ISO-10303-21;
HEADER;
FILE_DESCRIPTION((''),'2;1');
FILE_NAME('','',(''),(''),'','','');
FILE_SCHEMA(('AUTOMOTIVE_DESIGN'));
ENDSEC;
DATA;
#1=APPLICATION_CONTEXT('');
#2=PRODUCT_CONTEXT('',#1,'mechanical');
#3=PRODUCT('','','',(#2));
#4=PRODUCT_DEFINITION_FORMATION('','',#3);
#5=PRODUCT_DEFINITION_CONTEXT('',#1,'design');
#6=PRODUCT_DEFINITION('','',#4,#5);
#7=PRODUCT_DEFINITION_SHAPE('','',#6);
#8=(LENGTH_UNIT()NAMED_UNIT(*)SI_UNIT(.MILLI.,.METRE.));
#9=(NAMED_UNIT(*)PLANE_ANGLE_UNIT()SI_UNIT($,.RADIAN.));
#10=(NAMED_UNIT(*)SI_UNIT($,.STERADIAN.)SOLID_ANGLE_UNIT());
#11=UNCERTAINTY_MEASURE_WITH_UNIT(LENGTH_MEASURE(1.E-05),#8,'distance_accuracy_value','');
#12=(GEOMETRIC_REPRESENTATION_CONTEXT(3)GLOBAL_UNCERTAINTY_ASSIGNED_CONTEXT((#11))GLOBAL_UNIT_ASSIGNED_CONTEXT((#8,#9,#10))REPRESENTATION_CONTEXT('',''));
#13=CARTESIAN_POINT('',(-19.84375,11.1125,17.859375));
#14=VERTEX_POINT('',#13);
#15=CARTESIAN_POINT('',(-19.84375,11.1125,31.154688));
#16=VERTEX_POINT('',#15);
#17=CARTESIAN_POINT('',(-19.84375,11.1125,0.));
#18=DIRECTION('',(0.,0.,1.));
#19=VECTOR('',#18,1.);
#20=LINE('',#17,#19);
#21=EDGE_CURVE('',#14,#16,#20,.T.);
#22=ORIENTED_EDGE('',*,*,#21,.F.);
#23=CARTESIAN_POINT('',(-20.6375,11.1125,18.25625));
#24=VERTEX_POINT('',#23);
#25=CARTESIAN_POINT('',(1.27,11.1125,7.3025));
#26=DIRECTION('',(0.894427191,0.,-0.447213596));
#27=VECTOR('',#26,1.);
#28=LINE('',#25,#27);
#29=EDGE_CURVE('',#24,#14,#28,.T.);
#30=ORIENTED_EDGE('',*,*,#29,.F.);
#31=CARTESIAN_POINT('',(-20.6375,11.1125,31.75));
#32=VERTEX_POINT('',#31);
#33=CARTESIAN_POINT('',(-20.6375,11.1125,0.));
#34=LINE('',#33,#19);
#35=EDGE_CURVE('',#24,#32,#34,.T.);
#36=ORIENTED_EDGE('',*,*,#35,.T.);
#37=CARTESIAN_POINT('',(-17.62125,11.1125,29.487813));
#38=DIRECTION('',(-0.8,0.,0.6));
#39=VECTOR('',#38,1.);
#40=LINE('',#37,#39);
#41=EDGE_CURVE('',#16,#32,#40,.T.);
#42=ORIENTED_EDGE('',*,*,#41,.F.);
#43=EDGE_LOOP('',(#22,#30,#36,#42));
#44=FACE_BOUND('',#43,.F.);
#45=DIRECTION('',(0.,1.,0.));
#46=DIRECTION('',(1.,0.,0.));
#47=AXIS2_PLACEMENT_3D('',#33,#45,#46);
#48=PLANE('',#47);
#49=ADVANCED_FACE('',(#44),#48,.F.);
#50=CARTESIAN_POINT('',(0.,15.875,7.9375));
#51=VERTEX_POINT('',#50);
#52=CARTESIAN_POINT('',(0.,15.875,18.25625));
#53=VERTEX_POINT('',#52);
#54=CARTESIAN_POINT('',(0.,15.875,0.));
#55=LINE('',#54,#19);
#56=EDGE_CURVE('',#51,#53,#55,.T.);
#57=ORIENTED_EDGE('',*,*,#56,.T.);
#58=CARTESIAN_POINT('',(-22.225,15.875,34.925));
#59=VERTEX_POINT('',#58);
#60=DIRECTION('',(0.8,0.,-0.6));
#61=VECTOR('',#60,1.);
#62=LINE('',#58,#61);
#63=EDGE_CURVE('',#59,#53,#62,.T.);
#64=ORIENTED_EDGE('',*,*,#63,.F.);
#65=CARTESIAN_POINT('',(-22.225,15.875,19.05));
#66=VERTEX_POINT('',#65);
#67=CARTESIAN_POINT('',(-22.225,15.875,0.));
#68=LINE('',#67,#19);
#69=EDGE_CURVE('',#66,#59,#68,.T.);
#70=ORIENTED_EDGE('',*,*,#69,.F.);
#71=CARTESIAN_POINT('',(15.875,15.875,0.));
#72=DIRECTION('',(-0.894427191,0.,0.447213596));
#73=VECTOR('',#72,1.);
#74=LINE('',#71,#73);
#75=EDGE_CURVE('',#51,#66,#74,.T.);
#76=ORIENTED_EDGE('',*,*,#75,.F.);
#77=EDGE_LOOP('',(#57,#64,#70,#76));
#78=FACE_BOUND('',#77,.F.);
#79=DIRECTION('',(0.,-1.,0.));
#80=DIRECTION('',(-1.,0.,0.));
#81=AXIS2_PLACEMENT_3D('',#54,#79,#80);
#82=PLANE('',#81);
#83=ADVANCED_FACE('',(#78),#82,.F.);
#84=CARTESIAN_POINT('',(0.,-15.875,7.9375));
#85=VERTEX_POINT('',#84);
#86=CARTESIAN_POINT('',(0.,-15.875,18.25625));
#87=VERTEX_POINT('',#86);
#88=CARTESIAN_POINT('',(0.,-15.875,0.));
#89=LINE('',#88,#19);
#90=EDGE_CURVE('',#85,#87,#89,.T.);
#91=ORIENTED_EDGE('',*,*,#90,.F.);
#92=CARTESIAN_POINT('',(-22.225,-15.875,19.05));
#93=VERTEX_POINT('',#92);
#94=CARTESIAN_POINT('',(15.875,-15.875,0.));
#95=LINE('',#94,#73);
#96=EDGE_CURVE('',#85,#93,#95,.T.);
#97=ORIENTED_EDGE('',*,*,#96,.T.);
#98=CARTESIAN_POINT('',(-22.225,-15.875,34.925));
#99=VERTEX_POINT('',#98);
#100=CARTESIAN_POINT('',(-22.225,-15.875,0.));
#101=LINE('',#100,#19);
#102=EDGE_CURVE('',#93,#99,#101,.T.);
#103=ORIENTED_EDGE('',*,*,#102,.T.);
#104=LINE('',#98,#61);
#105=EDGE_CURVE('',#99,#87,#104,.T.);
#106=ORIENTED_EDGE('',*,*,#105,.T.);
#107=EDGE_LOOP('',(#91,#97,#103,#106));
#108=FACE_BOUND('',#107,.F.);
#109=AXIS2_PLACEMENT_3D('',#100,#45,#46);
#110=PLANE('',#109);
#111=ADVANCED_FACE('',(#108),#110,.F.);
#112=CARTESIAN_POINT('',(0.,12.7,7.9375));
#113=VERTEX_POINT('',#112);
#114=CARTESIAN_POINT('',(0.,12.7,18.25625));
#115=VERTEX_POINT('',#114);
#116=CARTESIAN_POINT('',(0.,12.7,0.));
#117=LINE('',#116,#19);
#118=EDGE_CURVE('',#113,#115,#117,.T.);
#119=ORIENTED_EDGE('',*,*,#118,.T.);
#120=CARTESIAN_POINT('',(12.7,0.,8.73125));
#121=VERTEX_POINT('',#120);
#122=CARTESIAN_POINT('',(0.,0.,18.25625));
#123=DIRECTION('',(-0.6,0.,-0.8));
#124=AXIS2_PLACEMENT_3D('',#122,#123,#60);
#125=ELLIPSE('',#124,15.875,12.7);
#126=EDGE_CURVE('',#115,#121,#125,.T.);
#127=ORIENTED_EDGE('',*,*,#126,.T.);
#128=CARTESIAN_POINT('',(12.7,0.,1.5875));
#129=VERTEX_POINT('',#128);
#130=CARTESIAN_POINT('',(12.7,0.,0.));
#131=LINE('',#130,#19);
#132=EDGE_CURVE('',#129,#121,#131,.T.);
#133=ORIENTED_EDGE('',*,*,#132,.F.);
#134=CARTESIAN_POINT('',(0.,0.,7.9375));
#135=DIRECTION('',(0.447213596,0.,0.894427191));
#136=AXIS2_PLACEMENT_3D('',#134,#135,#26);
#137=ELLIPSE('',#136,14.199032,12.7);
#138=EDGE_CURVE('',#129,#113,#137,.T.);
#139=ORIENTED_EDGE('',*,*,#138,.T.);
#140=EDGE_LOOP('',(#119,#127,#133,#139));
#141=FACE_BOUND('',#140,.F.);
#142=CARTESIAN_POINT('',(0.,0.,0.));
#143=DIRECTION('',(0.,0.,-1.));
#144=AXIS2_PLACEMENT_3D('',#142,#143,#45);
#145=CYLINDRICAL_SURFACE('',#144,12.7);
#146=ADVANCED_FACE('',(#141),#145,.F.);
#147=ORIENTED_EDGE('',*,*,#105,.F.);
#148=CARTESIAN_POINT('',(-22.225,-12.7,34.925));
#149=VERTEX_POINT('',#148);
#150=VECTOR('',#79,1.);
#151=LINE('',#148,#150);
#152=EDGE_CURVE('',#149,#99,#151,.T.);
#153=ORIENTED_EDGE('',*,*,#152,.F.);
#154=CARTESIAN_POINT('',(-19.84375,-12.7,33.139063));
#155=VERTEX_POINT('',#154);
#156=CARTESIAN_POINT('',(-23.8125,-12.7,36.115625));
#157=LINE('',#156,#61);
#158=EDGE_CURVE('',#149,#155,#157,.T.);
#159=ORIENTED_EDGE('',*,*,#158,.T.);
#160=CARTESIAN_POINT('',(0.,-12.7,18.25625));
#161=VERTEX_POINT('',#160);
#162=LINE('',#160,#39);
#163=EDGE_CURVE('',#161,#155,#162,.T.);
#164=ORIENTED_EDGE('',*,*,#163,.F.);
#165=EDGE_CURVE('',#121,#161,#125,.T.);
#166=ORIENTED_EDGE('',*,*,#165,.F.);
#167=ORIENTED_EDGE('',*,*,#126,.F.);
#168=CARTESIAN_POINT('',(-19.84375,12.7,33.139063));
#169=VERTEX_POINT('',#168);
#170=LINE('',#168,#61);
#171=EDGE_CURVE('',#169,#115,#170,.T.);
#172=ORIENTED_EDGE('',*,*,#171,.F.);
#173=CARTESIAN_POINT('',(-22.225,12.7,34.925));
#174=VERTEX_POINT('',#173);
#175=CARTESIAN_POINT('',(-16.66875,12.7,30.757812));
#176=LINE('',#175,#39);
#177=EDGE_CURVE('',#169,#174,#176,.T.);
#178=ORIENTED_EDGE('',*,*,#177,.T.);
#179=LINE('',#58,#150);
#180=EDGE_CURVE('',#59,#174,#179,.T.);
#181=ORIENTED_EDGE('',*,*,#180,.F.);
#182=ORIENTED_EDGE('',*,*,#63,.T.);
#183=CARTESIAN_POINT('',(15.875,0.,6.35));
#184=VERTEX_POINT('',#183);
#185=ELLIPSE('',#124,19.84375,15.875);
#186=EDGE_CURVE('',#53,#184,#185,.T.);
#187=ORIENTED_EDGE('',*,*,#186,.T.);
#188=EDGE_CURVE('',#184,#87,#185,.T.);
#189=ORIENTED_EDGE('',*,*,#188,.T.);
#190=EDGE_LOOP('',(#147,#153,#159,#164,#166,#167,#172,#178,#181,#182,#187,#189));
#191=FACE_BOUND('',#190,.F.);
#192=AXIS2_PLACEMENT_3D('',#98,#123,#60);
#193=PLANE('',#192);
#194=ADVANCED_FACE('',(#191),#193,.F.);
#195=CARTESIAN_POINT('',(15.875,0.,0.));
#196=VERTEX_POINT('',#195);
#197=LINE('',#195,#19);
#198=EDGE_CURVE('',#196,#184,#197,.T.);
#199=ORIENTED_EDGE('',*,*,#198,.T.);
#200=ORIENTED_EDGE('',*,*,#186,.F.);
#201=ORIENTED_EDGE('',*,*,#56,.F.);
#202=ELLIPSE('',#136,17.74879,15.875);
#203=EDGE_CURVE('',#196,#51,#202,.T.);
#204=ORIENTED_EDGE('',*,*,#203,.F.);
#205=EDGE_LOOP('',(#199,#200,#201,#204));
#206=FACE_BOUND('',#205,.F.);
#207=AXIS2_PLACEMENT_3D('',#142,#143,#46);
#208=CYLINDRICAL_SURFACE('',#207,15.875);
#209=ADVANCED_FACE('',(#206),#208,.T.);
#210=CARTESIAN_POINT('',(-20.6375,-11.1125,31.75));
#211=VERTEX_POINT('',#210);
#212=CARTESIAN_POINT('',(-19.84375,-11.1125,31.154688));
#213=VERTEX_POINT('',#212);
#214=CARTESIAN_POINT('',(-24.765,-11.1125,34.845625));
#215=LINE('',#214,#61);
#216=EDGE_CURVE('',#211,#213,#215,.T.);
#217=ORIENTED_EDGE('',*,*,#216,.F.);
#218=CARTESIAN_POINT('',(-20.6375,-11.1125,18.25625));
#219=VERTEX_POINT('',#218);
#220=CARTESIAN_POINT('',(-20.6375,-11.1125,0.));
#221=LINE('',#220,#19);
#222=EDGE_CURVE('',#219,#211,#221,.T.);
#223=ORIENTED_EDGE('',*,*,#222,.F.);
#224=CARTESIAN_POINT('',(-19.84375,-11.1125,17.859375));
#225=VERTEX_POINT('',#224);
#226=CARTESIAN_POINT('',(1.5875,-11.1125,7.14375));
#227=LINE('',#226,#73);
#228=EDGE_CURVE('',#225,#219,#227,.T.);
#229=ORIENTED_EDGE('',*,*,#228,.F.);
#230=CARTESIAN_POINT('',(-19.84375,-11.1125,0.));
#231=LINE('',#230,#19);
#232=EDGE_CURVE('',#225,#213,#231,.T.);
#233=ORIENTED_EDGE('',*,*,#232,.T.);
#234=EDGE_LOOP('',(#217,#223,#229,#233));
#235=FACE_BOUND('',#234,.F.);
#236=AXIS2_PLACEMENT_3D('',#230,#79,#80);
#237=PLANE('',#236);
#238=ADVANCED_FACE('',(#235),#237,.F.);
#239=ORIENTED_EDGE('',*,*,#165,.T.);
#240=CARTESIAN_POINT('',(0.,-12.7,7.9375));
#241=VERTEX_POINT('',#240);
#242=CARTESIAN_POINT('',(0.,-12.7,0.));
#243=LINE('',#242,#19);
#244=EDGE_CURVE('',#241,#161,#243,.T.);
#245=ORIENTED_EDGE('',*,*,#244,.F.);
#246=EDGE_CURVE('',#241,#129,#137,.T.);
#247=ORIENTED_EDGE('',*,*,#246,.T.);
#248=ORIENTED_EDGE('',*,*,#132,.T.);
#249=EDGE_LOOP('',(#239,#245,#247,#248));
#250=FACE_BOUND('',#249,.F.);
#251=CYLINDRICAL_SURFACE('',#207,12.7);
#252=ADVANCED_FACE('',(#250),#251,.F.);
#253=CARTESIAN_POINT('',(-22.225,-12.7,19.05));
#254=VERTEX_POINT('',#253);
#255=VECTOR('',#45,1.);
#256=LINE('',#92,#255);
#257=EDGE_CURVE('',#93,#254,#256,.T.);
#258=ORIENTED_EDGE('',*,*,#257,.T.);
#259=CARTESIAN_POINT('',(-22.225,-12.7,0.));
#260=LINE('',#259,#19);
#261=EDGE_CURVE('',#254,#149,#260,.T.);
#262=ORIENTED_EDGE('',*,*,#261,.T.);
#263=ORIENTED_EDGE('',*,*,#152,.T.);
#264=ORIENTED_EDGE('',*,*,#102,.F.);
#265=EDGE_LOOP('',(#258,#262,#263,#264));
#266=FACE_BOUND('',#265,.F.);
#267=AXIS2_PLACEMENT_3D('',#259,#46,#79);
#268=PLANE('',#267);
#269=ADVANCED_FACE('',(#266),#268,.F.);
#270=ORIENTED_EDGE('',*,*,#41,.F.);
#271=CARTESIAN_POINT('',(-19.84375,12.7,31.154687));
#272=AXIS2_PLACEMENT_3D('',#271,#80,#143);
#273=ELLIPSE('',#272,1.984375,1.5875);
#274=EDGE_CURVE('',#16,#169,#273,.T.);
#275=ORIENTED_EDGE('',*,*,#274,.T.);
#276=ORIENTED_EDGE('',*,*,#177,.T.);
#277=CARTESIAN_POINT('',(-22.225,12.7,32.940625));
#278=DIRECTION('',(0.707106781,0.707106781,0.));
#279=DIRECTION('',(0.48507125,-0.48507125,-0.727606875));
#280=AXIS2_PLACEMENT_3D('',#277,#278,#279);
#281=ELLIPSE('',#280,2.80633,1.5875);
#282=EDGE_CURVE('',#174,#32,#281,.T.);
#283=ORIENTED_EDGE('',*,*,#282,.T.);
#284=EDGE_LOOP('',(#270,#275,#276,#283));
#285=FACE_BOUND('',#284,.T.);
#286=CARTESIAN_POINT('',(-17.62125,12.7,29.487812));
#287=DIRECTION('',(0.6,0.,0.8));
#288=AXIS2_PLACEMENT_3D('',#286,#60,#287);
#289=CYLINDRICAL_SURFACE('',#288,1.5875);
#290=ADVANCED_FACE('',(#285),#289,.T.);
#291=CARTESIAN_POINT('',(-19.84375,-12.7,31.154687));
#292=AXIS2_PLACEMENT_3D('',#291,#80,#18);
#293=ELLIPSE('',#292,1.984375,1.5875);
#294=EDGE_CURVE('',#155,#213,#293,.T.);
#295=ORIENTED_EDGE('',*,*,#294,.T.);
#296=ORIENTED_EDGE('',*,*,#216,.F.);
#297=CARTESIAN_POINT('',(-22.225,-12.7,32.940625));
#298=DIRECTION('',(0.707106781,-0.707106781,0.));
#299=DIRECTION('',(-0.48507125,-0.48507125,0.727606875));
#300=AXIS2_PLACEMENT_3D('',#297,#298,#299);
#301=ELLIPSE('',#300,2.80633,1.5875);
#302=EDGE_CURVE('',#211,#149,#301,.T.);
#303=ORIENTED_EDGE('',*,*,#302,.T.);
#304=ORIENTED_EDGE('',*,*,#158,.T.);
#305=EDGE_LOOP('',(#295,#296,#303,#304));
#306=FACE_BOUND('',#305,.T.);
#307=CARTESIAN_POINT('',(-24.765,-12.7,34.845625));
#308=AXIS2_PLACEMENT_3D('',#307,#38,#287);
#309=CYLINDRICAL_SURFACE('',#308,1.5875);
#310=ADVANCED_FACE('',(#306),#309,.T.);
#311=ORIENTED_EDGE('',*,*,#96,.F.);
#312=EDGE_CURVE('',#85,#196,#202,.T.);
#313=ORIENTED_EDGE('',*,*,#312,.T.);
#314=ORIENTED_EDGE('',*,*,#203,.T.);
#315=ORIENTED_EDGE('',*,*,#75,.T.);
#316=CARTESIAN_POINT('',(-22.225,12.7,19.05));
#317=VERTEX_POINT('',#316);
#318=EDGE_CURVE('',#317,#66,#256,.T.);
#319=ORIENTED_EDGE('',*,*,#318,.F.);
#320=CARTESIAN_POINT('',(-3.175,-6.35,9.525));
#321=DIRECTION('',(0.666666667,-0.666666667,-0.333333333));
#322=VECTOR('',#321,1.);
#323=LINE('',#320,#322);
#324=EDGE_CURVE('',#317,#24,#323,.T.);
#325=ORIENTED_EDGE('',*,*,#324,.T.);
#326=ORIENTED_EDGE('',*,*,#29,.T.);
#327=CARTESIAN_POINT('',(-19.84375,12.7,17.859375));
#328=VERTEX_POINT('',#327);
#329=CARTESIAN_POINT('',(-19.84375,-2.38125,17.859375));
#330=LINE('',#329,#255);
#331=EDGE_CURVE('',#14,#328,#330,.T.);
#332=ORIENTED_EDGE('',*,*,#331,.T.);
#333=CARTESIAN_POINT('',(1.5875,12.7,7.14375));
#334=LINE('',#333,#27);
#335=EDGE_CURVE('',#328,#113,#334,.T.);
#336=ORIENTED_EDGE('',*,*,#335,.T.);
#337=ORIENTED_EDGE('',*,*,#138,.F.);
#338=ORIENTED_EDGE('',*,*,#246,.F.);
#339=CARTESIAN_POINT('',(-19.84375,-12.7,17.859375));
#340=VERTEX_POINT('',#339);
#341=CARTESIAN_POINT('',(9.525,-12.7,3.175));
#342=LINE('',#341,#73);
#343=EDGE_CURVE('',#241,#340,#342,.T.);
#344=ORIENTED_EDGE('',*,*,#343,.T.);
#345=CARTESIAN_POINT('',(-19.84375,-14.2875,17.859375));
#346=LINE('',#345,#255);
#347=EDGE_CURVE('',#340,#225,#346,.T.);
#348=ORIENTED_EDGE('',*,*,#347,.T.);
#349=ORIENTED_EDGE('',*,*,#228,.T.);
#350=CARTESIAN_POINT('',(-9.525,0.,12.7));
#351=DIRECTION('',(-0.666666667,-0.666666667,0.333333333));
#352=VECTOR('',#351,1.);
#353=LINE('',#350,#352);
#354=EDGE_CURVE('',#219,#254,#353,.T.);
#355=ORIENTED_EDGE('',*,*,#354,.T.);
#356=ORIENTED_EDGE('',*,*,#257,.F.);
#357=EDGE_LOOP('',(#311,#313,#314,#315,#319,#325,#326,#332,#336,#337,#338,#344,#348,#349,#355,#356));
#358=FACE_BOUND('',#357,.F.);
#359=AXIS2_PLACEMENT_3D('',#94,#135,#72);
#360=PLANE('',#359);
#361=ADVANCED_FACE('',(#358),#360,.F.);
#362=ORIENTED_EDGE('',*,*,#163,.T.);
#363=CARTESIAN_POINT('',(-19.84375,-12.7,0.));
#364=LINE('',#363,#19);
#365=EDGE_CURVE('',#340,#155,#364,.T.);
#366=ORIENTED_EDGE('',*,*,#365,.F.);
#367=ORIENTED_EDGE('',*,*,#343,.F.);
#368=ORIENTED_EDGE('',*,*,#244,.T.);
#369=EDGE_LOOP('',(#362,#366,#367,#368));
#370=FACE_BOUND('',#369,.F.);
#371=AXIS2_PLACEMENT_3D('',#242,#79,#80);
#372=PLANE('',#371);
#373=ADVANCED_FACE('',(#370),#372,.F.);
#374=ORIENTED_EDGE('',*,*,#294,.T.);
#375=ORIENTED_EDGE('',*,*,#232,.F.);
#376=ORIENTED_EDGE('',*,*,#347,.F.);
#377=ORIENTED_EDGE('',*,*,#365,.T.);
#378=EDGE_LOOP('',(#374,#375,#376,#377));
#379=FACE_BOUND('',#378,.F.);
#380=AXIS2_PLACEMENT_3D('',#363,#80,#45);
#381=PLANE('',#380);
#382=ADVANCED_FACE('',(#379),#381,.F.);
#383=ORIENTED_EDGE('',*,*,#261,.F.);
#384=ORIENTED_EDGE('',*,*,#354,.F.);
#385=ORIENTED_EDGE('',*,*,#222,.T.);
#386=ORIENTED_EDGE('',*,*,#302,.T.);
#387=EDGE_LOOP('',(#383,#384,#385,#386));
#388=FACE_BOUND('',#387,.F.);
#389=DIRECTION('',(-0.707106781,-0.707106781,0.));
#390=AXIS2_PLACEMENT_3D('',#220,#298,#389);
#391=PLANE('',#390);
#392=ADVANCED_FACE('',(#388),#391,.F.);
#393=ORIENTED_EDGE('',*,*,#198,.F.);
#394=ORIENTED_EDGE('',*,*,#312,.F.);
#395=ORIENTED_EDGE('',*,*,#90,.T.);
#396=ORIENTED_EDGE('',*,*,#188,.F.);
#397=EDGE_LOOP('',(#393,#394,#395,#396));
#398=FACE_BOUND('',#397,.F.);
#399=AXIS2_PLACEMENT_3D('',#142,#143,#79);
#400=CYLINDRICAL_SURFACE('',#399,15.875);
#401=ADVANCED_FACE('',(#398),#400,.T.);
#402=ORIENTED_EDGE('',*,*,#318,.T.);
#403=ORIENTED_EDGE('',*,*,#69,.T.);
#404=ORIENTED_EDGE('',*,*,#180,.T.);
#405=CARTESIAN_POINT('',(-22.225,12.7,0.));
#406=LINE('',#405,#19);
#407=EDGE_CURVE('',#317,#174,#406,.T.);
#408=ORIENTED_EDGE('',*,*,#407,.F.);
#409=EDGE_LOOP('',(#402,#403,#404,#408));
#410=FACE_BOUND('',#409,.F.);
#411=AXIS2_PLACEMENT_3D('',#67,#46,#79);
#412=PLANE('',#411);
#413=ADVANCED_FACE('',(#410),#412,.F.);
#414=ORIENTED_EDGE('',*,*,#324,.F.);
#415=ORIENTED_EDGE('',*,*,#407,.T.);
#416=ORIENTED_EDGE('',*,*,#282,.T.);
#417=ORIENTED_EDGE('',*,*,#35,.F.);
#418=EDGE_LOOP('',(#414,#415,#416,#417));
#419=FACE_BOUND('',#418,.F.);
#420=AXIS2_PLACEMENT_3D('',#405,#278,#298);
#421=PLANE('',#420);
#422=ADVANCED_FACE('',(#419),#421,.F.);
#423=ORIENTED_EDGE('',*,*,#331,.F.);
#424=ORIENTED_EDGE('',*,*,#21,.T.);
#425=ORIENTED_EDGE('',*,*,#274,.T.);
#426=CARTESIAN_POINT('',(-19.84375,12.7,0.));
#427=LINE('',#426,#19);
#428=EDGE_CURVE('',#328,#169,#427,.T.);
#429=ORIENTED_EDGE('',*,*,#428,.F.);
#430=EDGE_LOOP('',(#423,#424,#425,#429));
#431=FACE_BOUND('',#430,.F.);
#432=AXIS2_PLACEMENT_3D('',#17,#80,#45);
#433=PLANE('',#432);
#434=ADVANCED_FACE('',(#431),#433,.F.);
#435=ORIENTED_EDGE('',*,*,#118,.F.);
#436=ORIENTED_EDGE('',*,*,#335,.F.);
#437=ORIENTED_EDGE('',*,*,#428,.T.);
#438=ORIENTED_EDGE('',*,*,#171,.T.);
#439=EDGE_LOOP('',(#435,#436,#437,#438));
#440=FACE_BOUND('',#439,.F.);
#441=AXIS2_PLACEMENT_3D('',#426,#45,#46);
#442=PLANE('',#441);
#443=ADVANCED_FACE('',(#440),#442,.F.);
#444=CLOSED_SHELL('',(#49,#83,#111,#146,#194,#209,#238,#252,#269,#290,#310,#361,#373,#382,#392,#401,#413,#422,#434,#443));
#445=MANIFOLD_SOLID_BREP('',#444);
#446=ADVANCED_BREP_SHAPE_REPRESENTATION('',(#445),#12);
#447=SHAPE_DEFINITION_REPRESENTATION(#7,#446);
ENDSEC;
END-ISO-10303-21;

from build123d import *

# Parameters (mm, degrees)
F1_DEPTH    = 34.925
F3_DEPTH    = 31.75
F4_T1_DEPTH = 8.9296875
F4_T3_DEPTH = 8.9296875


# Not quite as in the source:
# - a fillet or chamfer that OpenCascade refuses, or shapes differently, is made with other operations: its cross-section is extruded or revolved along the edge and cut away or added


with BuildPart() as f1:
    # F0 (on Top) → F1 (new body)
    with BuildSketch(Plane.XY):
        with BuildLine():
            Line((0, 15.875), (-22.225, 15.875))
            Line((-22.225, 15.875), (-22.225, 12.7))
            Line((-22.225, 12.7), (-20.6375, 11.1125))
            Line((-20.6375, 11.1125), (-19.84375, 11.1125))
            Line((-19.84375, 11.1125), (-19.84375, 12.7))
            Line((-19.84375, 12.7), (0, 12.7))
            ThreePointArc((0, 12.7), (8.9802561211, 8.9802561211), (12.7, 0))
            ThreePointArc((12.7, 0), (8.9802561211, -8.9802561211), (0, -12.7))
            Line((0, -12.7), (-19.84375, -12.7))
            Line((-19.84375, -12.7), (-19.84375, -11.1125))
            Line((-19.84375, -11.1125), (-20.6375, -11.1125))
            Line((-20.6375, -11.1125), (-22.225, -12.7))
            Line((-22.225, -12.7), (-22.225, -15.875))
            Line((-22.225, -15.875), (0, -15.875))
            ThreePointArc((0, -15.875), (11.2253201513, -11.2253201513), (15.875, 0))
            ThreePointArc((15.875, 0), (11.2253201513, 11.2253201513), (0, 15.875))
        make_face()
    extrude(amount=F1_DEPTH)

    # F2 (on face) → F3 (cut, through all)
    with BuildSketch(Plane.XZ.offset(15.875)):
        Polygon((0, 18.25625), (0, 34.925), (-22.225, 34.925), align=None)
        Polygon((15.875, 6.35), (15.875, 34.925), (0, 34.925), (0, 18.25625), align=None)
        Polygon((-22.225, 0), (0, 0), (0, 7.9375), (-22.225, 19.05), align=None)
        Polygon((0, 0), (15.875, 0), (0, 7.9375), align=None)
    extrude(amount=-F3_DEPTH, mode=Mode.SUBTRACT)

    # F4: fillet of radius 1.5875 on 2 edges, made by hand

    # F4_s2 → F4_t1 (cut)
    with BuildSketch(Plane(origin=(-25.43175, 0, 19.0738125), x_dir=(0, 1, 0), z_dir=(-0.8, 0, 0.6))):
        with BuildLine():
            ThreePointArc((12.7, -14.605), (11.5774679849, -14.1400320151), (11.1125, -13.0175))
            Line((11.1125, -13.0175), (11.1125, -14.605))
            Line((11.1125, -14.605), (12.7, -14.605))
        make_face()
    extrude(amount=F4_T1_DEPTH, mode=Mode.SUBTRACT)

    # F4_s4 → F4_t3 (cut)
    with BuildSketch(Plane(origin=(-32.5755, 0, 24.431625), x_dir=(0, 1, 0), z_dir=(0.8, 0, -0.6))):
        with BuildLine():
            ThreePointArc((-12.7, 14.605), (-11.5774679849, 14.1400320151), (-11.1125, 13.0175))
            Line((-11.1125, 13.0175), (-11.1125, 14.605))
            Line((-11.1125, 14.605), (-12.7, 14.605))
        make_face()
    extrude(amount=F4_T3_DEPTH, mode=Mode.SUBTRACT)


solid = f1.part
